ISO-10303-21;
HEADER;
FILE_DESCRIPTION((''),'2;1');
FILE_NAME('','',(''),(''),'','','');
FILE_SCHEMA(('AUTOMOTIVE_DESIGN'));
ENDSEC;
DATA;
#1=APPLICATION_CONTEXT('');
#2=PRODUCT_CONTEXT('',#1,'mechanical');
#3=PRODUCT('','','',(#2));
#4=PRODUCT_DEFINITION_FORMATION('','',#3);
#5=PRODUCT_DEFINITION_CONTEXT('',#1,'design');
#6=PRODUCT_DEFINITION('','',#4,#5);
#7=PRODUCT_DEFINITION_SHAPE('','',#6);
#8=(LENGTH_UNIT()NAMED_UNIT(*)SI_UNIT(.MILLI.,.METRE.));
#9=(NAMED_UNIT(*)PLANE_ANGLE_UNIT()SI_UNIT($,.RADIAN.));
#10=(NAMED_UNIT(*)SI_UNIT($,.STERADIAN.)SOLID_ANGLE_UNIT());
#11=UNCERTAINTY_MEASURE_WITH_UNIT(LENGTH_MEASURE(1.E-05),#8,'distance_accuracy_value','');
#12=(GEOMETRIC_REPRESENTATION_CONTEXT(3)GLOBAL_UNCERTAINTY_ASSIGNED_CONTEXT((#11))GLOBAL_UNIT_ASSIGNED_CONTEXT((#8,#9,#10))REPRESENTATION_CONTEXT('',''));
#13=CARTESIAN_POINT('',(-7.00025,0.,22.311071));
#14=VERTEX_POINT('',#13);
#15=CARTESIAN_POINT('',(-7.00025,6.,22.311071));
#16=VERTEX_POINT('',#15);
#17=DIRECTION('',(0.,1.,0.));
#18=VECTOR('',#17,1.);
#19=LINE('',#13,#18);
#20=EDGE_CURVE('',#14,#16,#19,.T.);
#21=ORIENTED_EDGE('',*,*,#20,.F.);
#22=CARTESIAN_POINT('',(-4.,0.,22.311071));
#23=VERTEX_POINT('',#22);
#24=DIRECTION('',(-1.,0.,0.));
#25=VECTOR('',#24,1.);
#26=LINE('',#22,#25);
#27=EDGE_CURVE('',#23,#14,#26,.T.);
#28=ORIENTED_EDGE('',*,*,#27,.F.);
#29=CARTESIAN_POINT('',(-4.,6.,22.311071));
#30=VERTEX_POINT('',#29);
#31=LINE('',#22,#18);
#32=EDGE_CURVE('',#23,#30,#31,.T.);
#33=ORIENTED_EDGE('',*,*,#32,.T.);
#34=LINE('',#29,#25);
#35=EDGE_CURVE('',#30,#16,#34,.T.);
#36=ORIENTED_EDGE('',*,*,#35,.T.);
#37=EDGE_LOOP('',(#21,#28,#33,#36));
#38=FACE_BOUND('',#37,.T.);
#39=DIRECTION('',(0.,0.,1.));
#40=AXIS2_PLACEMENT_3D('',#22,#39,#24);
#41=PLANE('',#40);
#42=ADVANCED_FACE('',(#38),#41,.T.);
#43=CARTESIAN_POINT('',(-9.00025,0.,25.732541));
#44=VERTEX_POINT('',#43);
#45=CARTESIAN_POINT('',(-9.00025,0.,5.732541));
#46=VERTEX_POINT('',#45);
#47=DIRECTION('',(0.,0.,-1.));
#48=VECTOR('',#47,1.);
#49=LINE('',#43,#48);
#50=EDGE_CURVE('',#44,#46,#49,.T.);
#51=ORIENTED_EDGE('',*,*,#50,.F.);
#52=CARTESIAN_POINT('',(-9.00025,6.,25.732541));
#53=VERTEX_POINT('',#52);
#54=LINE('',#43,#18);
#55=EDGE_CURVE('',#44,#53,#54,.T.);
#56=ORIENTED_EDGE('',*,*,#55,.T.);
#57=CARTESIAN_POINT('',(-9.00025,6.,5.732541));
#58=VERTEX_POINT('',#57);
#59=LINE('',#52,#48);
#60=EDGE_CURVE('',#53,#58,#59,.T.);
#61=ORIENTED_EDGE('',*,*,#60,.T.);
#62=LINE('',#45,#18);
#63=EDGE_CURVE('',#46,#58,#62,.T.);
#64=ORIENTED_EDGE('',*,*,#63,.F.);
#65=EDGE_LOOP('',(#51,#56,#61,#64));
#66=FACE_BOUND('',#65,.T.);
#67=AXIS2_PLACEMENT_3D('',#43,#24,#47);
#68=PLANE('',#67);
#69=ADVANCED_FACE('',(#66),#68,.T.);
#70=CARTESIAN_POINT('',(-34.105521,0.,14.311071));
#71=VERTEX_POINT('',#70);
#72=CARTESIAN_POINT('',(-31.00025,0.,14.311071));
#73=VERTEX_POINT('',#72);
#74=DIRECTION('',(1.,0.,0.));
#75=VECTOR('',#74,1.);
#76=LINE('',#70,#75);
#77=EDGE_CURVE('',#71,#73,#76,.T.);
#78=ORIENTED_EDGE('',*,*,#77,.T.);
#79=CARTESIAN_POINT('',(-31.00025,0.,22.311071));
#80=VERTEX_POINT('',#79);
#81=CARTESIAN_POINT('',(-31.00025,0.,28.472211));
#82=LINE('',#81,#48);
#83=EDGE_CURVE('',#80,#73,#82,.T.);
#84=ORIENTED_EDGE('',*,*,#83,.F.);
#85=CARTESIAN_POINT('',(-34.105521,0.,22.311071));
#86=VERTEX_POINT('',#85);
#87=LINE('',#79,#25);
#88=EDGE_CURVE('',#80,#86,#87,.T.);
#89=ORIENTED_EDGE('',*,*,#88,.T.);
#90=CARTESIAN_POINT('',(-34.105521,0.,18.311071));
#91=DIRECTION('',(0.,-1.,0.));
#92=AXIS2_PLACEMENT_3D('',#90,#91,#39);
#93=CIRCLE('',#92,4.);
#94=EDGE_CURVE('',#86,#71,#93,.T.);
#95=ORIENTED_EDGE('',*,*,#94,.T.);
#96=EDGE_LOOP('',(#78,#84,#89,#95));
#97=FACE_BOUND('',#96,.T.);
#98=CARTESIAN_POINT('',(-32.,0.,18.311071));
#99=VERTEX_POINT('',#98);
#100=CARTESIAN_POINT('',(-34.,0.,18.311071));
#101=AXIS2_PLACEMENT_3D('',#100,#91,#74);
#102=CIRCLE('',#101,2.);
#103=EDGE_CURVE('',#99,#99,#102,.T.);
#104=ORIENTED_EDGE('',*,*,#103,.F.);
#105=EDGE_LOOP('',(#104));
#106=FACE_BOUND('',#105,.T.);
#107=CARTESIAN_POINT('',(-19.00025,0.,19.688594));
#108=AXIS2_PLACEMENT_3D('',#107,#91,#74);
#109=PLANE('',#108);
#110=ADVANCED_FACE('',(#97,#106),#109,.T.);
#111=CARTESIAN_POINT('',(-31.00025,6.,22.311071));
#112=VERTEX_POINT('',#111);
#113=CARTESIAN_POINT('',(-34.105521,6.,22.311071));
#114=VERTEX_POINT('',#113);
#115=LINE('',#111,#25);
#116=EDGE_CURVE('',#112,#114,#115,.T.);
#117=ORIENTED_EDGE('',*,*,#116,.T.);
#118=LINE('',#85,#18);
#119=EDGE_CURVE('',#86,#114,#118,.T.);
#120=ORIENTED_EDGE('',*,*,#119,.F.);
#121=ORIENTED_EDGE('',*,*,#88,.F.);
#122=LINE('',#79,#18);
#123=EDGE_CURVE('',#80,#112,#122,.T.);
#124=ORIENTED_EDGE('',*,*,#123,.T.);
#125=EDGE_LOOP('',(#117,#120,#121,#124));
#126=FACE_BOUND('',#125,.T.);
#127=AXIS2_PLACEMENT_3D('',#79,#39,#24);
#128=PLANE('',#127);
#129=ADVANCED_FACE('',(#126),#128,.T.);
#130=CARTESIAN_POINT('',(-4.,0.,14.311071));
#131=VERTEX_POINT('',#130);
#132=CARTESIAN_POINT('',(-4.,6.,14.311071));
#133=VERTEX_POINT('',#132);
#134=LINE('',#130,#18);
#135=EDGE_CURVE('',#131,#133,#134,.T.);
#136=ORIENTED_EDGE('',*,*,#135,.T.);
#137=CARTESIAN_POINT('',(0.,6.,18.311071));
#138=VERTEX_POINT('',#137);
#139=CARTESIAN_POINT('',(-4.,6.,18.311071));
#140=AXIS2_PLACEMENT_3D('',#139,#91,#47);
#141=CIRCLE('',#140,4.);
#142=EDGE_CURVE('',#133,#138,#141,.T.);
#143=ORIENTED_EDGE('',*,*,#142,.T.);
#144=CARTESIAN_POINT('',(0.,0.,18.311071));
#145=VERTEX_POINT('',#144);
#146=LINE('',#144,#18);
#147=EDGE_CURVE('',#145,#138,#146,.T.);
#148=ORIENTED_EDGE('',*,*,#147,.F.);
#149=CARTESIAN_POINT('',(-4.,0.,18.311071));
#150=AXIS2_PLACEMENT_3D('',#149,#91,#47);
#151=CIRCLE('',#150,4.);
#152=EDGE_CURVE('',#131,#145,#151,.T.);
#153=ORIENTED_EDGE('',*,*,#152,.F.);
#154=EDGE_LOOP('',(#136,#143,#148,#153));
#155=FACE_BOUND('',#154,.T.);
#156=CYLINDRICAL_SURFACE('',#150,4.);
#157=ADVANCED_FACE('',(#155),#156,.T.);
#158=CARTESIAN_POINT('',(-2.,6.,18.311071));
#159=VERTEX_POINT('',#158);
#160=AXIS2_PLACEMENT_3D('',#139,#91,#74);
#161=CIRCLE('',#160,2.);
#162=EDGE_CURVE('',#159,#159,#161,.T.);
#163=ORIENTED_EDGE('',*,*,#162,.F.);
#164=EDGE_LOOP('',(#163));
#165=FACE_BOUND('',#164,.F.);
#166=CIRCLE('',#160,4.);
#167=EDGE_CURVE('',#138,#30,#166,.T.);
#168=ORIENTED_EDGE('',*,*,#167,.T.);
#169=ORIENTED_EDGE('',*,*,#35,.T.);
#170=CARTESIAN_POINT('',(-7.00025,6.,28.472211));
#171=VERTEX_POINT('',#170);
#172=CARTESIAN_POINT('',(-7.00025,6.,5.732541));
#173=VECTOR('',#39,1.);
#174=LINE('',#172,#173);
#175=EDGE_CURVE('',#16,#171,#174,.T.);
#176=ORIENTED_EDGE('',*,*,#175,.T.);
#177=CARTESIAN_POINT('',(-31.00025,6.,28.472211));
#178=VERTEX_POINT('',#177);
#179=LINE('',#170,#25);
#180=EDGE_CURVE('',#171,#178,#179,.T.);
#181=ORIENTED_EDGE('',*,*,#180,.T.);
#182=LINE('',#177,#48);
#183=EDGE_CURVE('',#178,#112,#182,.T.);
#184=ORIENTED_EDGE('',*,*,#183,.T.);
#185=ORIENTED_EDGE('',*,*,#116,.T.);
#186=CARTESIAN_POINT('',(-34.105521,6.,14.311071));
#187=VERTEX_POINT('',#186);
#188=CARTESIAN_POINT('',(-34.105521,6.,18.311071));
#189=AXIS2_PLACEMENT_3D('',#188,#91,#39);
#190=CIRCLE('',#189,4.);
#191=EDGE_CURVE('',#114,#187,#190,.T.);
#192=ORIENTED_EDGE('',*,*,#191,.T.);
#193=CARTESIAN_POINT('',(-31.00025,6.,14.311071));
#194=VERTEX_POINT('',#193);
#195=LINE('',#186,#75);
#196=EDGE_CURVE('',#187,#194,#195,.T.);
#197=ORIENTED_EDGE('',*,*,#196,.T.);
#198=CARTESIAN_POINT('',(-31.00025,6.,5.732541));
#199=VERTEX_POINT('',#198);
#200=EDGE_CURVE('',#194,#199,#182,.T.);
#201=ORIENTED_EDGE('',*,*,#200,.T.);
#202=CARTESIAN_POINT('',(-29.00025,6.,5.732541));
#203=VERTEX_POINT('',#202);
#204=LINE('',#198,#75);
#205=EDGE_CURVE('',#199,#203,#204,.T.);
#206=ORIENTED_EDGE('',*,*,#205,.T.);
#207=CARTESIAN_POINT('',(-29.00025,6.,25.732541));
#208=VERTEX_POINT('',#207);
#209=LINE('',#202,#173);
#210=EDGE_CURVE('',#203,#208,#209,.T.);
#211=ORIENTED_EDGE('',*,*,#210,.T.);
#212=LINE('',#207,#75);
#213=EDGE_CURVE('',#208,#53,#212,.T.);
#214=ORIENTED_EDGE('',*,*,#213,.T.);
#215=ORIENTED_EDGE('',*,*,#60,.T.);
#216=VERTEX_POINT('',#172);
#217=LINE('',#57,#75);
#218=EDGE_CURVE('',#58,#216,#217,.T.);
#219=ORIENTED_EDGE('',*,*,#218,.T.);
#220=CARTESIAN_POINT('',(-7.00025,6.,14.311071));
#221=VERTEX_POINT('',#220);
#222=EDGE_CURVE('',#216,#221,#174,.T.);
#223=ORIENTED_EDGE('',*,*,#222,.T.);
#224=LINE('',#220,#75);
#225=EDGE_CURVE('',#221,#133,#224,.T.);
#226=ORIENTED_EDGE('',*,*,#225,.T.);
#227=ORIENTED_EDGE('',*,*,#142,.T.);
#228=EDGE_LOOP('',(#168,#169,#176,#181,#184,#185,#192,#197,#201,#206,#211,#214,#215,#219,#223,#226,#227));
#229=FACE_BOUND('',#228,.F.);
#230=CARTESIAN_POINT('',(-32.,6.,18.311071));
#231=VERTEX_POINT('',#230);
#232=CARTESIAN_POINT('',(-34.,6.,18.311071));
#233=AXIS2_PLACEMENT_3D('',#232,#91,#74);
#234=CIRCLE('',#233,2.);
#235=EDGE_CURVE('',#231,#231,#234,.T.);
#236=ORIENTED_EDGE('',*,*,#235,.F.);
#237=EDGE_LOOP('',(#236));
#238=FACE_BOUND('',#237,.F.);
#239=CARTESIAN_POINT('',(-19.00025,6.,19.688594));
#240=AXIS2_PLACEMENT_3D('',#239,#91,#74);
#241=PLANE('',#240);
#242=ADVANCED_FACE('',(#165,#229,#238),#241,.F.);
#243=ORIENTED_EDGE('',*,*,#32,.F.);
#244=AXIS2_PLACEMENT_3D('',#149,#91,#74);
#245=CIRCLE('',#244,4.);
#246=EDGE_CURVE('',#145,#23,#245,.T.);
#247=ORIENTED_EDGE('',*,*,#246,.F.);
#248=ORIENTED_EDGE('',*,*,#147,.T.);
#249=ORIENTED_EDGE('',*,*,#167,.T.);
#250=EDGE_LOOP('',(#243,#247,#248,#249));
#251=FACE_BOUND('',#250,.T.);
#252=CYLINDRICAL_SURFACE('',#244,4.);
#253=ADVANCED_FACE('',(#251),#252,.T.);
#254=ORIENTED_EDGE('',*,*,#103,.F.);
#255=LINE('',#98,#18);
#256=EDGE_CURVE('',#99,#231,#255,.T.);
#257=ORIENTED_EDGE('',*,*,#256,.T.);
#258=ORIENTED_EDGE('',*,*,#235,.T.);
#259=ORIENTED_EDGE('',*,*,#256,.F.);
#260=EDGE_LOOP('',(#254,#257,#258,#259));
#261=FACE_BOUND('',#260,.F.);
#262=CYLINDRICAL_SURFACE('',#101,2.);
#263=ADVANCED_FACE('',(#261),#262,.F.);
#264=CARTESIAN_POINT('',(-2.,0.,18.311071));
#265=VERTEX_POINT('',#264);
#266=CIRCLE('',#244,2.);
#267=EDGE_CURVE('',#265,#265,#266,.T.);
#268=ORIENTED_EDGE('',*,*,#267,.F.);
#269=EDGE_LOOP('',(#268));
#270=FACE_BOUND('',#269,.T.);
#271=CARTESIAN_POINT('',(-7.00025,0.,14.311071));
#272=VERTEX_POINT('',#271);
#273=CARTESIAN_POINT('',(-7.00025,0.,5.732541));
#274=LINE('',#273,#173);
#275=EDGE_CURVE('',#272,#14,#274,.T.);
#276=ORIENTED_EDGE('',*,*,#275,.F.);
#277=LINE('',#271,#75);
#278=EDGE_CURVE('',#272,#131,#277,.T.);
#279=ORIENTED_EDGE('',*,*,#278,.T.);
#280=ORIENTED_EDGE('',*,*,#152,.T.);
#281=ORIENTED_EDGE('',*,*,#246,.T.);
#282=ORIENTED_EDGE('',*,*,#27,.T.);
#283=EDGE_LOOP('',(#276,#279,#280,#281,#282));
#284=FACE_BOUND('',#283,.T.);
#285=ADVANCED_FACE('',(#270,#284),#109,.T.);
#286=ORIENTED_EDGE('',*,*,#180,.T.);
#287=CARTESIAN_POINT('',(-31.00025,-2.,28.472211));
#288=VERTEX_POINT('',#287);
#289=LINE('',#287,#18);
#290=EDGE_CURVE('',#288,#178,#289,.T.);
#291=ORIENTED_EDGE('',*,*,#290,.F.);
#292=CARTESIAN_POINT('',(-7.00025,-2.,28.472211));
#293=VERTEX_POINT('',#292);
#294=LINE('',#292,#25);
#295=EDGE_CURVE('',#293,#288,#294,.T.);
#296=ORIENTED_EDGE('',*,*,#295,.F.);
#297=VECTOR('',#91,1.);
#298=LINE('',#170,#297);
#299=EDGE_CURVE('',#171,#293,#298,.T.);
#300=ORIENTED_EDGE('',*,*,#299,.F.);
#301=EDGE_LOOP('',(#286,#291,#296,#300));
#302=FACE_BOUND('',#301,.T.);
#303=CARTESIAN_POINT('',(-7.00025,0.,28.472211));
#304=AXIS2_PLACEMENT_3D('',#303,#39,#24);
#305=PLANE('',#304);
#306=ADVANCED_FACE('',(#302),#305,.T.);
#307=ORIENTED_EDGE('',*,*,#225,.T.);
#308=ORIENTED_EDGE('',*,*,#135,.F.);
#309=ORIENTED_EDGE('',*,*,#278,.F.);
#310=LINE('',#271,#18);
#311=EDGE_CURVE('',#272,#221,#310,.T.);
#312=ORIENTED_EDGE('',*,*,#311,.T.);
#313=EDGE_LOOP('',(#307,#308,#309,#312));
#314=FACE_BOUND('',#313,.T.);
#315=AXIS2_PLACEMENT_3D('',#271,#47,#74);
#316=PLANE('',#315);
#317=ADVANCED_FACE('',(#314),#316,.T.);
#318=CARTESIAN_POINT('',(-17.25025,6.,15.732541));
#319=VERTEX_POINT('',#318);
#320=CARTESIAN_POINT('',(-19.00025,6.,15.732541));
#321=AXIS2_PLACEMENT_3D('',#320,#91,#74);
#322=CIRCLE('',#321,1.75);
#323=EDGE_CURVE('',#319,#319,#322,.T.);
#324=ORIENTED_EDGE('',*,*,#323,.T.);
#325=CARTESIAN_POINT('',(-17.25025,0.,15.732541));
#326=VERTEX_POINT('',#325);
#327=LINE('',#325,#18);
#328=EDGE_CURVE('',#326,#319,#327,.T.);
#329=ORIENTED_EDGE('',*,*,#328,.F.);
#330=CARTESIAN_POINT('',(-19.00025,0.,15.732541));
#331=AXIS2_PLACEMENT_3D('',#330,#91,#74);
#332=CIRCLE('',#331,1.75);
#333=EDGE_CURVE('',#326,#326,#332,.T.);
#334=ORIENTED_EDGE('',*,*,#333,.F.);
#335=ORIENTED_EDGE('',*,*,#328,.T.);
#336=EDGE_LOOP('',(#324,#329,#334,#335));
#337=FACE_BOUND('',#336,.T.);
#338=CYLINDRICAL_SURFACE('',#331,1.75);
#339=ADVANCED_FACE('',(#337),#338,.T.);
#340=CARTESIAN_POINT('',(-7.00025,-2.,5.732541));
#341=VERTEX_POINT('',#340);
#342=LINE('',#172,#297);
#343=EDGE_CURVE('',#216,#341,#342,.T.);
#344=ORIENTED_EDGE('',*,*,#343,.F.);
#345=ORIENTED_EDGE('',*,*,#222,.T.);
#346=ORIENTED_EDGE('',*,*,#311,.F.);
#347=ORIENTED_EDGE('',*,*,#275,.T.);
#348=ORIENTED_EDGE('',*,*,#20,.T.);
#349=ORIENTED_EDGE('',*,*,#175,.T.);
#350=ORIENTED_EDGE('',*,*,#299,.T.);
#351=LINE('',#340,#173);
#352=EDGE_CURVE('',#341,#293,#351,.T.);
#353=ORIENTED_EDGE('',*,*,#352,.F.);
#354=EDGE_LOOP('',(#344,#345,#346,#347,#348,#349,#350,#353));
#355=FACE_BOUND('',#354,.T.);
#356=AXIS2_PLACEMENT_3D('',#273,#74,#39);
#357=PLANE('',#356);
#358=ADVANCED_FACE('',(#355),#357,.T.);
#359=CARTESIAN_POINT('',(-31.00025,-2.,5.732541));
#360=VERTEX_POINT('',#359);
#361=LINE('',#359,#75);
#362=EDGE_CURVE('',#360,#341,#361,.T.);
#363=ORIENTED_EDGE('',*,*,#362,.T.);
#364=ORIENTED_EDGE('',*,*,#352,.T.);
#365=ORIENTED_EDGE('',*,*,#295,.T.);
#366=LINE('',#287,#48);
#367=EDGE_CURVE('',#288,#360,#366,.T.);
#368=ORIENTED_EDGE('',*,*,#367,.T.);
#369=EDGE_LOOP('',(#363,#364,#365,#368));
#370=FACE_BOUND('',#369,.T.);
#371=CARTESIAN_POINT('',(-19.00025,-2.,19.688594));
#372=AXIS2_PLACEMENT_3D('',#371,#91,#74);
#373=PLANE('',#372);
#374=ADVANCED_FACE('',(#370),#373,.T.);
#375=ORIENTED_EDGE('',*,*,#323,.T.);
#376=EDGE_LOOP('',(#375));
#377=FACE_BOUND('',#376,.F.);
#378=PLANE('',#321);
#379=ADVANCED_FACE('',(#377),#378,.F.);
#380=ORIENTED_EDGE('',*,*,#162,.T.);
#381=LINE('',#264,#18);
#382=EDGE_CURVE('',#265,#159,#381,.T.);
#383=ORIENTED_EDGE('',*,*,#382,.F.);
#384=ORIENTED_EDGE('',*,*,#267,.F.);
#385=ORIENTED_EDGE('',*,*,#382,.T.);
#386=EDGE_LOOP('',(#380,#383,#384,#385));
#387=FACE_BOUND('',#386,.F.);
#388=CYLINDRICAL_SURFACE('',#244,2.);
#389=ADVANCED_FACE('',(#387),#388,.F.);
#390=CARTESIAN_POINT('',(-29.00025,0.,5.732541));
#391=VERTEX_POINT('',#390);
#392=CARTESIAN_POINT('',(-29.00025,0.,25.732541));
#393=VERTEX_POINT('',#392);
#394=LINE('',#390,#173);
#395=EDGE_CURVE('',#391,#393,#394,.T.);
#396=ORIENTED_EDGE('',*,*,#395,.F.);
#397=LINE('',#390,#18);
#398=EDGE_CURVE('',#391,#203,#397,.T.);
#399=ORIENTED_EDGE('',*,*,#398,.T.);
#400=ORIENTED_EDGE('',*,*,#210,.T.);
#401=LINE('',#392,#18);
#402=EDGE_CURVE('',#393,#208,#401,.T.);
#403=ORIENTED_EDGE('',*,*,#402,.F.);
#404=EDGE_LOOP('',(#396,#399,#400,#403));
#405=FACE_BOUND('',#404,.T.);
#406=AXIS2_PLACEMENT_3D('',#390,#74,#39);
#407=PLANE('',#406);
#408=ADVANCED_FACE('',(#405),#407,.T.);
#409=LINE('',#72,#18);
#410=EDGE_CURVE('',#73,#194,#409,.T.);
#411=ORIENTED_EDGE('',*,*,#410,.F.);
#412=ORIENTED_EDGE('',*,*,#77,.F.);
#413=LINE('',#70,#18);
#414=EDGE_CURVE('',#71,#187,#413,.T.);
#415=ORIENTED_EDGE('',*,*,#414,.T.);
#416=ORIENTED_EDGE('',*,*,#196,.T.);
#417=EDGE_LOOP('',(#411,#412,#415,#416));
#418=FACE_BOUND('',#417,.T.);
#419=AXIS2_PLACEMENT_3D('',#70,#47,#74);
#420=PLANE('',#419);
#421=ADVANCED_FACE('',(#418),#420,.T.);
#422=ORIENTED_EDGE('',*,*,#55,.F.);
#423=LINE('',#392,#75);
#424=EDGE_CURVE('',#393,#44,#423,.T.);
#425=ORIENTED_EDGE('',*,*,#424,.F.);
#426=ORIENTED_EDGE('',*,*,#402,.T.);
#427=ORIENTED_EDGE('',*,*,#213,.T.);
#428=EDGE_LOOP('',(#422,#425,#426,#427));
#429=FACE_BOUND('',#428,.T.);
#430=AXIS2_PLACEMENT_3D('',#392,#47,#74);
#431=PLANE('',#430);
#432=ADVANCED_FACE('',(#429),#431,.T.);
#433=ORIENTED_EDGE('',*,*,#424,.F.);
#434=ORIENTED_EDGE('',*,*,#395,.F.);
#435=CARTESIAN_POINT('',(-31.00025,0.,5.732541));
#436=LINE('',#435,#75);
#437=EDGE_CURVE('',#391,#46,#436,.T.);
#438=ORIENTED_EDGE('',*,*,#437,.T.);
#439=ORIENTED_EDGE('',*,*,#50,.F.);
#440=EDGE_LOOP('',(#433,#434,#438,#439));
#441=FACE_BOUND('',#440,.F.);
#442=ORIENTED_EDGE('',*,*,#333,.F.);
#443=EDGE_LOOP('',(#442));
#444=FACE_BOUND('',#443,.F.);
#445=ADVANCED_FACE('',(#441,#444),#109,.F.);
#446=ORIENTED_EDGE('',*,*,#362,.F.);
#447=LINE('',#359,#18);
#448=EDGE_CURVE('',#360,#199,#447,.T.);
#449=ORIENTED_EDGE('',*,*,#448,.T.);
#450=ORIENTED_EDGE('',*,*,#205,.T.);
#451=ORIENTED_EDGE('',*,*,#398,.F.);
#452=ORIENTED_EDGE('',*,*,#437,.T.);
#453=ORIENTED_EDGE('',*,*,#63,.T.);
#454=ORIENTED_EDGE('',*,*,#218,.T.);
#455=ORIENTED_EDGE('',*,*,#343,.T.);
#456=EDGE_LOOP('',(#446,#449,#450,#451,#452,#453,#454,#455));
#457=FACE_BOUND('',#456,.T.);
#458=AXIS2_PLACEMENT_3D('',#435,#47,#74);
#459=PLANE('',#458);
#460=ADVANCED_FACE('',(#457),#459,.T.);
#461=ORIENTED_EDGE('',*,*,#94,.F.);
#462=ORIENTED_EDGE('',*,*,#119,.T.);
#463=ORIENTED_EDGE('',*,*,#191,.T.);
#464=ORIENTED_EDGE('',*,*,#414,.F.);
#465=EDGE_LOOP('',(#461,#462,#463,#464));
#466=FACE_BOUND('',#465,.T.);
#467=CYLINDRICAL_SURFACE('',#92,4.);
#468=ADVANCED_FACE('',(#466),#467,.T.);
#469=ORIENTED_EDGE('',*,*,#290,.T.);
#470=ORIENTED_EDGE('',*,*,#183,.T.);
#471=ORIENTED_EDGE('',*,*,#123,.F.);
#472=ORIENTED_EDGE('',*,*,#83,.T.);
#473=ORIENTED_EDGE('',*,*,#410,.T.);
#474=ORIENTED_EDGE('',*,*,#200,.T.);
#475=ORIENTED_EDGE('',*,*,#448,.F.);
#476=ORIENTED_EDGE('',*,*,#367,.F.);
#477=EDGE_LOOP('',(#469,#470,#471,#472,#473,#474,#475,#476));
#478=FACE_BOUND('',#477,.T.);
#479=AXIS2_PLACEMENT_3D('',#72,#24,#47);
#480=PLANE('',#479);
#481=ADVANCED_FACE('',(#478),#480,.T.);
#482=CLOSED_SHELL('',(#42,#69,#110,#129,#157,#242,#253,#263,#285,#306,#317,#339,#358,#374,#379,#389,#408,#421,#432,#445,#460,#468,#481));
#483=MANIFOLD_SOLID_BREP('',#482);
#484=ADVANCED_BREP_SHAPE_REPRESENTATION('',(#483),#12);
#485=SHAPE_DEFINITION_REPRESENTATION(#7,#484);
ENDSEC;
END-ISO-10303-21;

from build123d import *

# Parameters (mm, degrees)
F0_W     = 20
F0_H     = 20
F0_R     = 1.75
F1_DEPTH = 2
F0_R_2   = 2
F2_DEPTH = 6


# Not quite as in the source:
# - a feature names something its author has since deleted; it is built from what else it names


with BuildPart() as f1:
    # F0 (on Front) → F1 (new body)
    with BuildSketch(Plane.XZ):
        Polygon((-29.00025, 5.7325412996), (-29.00025, 25.7325412996), (-9.00025, 25.7325412996), (-9.00025, 5.7325412996), (-7.00025, 5.7325412996), (-7.00025, 14.311070554), (-7.00025, 22.311070554), (-7.00025, 28.4722108253), (-31.00025, 28.4722108253), (-31.00025, 22.311070554), (-31.00025, 14.311070554), (-31.00025, 5.7325412996), align=None)
        with Locations((-19.00025, 15.7325412996)):
            Rectangle(F0_W, F0_H)
        with Locations((-19.00025, 15.7325412996)):
            Circle(F0_R, mode=Mode.SUBTRACT)
        with Locations((-19.00025, 15.7325412996)):
            Circle(F0_R)
    extrude(amount=F1_DEPTH)

    # F0 (on Front) → F2 (join)
    with BuildSketch(Plane.XZ):
        Polygon((-29.00025, 5.7325412996), (-29.00025, 25.7325412996), (-9.00025, 25.7325412996), (-9.00025, 5.7325412996), (-7.00025, 5.7325412996), (-7.00025, 14.311070554), (-7.00025, 22.311070554), (-7.00025, 28.4722108253), (-31.00025, 28.4722108253), (-31.00025, 22.311070554), (-31.00025, 14.311070554), (-31.00025, 5.7325412996), align=None)
        with BuildLine():
            Line((-7.00025, 22.311070554), (-7.00025, 14.311070554))
            Line((-7.00025, 14.311070554), (-4, 14.311070554))
            ThreePointArc((-4, 14.311070554), (-1.1715728753, 15.4826434292), (0, 18.311070554))
            ThreePointArc((0, 18.311070554), (-1.1715728753, 21.1394976787), (-4, 22.311070554))
            Line((-4, 22.311070554), (-7.00025, 22.311070554))
        make_face()
        with Locations((-4, 18.311070554)):
            Circle(F0_R_2, mode=Mode.SUBTRACT)
        with Locations((-19.00025, 15.7325412996)):
            Circle(F0_R)
        with BuildLine():
            Line((-34.1055206901, 14.311070554), (-31.00025, 14.311070554))
            Line((-31.00025, 14.311070554), (-31.00025, 22.311070554))
            Line((-31.00025, 22.311070554), (-34.1055206901, 22.311070554))
            ThreePointArc((-34.1055206901, 22.311070554), (-38.1055206901, 18.311070554), (-34.1055206901, 14.311070554))
        make_face()
        with Locations((-34, 18.311070554)):
            Circle(F0_R_2, mode=Mode.SUBTRACT)
    extrude(amount=-F2_DEPTH)


solid = f1.part
